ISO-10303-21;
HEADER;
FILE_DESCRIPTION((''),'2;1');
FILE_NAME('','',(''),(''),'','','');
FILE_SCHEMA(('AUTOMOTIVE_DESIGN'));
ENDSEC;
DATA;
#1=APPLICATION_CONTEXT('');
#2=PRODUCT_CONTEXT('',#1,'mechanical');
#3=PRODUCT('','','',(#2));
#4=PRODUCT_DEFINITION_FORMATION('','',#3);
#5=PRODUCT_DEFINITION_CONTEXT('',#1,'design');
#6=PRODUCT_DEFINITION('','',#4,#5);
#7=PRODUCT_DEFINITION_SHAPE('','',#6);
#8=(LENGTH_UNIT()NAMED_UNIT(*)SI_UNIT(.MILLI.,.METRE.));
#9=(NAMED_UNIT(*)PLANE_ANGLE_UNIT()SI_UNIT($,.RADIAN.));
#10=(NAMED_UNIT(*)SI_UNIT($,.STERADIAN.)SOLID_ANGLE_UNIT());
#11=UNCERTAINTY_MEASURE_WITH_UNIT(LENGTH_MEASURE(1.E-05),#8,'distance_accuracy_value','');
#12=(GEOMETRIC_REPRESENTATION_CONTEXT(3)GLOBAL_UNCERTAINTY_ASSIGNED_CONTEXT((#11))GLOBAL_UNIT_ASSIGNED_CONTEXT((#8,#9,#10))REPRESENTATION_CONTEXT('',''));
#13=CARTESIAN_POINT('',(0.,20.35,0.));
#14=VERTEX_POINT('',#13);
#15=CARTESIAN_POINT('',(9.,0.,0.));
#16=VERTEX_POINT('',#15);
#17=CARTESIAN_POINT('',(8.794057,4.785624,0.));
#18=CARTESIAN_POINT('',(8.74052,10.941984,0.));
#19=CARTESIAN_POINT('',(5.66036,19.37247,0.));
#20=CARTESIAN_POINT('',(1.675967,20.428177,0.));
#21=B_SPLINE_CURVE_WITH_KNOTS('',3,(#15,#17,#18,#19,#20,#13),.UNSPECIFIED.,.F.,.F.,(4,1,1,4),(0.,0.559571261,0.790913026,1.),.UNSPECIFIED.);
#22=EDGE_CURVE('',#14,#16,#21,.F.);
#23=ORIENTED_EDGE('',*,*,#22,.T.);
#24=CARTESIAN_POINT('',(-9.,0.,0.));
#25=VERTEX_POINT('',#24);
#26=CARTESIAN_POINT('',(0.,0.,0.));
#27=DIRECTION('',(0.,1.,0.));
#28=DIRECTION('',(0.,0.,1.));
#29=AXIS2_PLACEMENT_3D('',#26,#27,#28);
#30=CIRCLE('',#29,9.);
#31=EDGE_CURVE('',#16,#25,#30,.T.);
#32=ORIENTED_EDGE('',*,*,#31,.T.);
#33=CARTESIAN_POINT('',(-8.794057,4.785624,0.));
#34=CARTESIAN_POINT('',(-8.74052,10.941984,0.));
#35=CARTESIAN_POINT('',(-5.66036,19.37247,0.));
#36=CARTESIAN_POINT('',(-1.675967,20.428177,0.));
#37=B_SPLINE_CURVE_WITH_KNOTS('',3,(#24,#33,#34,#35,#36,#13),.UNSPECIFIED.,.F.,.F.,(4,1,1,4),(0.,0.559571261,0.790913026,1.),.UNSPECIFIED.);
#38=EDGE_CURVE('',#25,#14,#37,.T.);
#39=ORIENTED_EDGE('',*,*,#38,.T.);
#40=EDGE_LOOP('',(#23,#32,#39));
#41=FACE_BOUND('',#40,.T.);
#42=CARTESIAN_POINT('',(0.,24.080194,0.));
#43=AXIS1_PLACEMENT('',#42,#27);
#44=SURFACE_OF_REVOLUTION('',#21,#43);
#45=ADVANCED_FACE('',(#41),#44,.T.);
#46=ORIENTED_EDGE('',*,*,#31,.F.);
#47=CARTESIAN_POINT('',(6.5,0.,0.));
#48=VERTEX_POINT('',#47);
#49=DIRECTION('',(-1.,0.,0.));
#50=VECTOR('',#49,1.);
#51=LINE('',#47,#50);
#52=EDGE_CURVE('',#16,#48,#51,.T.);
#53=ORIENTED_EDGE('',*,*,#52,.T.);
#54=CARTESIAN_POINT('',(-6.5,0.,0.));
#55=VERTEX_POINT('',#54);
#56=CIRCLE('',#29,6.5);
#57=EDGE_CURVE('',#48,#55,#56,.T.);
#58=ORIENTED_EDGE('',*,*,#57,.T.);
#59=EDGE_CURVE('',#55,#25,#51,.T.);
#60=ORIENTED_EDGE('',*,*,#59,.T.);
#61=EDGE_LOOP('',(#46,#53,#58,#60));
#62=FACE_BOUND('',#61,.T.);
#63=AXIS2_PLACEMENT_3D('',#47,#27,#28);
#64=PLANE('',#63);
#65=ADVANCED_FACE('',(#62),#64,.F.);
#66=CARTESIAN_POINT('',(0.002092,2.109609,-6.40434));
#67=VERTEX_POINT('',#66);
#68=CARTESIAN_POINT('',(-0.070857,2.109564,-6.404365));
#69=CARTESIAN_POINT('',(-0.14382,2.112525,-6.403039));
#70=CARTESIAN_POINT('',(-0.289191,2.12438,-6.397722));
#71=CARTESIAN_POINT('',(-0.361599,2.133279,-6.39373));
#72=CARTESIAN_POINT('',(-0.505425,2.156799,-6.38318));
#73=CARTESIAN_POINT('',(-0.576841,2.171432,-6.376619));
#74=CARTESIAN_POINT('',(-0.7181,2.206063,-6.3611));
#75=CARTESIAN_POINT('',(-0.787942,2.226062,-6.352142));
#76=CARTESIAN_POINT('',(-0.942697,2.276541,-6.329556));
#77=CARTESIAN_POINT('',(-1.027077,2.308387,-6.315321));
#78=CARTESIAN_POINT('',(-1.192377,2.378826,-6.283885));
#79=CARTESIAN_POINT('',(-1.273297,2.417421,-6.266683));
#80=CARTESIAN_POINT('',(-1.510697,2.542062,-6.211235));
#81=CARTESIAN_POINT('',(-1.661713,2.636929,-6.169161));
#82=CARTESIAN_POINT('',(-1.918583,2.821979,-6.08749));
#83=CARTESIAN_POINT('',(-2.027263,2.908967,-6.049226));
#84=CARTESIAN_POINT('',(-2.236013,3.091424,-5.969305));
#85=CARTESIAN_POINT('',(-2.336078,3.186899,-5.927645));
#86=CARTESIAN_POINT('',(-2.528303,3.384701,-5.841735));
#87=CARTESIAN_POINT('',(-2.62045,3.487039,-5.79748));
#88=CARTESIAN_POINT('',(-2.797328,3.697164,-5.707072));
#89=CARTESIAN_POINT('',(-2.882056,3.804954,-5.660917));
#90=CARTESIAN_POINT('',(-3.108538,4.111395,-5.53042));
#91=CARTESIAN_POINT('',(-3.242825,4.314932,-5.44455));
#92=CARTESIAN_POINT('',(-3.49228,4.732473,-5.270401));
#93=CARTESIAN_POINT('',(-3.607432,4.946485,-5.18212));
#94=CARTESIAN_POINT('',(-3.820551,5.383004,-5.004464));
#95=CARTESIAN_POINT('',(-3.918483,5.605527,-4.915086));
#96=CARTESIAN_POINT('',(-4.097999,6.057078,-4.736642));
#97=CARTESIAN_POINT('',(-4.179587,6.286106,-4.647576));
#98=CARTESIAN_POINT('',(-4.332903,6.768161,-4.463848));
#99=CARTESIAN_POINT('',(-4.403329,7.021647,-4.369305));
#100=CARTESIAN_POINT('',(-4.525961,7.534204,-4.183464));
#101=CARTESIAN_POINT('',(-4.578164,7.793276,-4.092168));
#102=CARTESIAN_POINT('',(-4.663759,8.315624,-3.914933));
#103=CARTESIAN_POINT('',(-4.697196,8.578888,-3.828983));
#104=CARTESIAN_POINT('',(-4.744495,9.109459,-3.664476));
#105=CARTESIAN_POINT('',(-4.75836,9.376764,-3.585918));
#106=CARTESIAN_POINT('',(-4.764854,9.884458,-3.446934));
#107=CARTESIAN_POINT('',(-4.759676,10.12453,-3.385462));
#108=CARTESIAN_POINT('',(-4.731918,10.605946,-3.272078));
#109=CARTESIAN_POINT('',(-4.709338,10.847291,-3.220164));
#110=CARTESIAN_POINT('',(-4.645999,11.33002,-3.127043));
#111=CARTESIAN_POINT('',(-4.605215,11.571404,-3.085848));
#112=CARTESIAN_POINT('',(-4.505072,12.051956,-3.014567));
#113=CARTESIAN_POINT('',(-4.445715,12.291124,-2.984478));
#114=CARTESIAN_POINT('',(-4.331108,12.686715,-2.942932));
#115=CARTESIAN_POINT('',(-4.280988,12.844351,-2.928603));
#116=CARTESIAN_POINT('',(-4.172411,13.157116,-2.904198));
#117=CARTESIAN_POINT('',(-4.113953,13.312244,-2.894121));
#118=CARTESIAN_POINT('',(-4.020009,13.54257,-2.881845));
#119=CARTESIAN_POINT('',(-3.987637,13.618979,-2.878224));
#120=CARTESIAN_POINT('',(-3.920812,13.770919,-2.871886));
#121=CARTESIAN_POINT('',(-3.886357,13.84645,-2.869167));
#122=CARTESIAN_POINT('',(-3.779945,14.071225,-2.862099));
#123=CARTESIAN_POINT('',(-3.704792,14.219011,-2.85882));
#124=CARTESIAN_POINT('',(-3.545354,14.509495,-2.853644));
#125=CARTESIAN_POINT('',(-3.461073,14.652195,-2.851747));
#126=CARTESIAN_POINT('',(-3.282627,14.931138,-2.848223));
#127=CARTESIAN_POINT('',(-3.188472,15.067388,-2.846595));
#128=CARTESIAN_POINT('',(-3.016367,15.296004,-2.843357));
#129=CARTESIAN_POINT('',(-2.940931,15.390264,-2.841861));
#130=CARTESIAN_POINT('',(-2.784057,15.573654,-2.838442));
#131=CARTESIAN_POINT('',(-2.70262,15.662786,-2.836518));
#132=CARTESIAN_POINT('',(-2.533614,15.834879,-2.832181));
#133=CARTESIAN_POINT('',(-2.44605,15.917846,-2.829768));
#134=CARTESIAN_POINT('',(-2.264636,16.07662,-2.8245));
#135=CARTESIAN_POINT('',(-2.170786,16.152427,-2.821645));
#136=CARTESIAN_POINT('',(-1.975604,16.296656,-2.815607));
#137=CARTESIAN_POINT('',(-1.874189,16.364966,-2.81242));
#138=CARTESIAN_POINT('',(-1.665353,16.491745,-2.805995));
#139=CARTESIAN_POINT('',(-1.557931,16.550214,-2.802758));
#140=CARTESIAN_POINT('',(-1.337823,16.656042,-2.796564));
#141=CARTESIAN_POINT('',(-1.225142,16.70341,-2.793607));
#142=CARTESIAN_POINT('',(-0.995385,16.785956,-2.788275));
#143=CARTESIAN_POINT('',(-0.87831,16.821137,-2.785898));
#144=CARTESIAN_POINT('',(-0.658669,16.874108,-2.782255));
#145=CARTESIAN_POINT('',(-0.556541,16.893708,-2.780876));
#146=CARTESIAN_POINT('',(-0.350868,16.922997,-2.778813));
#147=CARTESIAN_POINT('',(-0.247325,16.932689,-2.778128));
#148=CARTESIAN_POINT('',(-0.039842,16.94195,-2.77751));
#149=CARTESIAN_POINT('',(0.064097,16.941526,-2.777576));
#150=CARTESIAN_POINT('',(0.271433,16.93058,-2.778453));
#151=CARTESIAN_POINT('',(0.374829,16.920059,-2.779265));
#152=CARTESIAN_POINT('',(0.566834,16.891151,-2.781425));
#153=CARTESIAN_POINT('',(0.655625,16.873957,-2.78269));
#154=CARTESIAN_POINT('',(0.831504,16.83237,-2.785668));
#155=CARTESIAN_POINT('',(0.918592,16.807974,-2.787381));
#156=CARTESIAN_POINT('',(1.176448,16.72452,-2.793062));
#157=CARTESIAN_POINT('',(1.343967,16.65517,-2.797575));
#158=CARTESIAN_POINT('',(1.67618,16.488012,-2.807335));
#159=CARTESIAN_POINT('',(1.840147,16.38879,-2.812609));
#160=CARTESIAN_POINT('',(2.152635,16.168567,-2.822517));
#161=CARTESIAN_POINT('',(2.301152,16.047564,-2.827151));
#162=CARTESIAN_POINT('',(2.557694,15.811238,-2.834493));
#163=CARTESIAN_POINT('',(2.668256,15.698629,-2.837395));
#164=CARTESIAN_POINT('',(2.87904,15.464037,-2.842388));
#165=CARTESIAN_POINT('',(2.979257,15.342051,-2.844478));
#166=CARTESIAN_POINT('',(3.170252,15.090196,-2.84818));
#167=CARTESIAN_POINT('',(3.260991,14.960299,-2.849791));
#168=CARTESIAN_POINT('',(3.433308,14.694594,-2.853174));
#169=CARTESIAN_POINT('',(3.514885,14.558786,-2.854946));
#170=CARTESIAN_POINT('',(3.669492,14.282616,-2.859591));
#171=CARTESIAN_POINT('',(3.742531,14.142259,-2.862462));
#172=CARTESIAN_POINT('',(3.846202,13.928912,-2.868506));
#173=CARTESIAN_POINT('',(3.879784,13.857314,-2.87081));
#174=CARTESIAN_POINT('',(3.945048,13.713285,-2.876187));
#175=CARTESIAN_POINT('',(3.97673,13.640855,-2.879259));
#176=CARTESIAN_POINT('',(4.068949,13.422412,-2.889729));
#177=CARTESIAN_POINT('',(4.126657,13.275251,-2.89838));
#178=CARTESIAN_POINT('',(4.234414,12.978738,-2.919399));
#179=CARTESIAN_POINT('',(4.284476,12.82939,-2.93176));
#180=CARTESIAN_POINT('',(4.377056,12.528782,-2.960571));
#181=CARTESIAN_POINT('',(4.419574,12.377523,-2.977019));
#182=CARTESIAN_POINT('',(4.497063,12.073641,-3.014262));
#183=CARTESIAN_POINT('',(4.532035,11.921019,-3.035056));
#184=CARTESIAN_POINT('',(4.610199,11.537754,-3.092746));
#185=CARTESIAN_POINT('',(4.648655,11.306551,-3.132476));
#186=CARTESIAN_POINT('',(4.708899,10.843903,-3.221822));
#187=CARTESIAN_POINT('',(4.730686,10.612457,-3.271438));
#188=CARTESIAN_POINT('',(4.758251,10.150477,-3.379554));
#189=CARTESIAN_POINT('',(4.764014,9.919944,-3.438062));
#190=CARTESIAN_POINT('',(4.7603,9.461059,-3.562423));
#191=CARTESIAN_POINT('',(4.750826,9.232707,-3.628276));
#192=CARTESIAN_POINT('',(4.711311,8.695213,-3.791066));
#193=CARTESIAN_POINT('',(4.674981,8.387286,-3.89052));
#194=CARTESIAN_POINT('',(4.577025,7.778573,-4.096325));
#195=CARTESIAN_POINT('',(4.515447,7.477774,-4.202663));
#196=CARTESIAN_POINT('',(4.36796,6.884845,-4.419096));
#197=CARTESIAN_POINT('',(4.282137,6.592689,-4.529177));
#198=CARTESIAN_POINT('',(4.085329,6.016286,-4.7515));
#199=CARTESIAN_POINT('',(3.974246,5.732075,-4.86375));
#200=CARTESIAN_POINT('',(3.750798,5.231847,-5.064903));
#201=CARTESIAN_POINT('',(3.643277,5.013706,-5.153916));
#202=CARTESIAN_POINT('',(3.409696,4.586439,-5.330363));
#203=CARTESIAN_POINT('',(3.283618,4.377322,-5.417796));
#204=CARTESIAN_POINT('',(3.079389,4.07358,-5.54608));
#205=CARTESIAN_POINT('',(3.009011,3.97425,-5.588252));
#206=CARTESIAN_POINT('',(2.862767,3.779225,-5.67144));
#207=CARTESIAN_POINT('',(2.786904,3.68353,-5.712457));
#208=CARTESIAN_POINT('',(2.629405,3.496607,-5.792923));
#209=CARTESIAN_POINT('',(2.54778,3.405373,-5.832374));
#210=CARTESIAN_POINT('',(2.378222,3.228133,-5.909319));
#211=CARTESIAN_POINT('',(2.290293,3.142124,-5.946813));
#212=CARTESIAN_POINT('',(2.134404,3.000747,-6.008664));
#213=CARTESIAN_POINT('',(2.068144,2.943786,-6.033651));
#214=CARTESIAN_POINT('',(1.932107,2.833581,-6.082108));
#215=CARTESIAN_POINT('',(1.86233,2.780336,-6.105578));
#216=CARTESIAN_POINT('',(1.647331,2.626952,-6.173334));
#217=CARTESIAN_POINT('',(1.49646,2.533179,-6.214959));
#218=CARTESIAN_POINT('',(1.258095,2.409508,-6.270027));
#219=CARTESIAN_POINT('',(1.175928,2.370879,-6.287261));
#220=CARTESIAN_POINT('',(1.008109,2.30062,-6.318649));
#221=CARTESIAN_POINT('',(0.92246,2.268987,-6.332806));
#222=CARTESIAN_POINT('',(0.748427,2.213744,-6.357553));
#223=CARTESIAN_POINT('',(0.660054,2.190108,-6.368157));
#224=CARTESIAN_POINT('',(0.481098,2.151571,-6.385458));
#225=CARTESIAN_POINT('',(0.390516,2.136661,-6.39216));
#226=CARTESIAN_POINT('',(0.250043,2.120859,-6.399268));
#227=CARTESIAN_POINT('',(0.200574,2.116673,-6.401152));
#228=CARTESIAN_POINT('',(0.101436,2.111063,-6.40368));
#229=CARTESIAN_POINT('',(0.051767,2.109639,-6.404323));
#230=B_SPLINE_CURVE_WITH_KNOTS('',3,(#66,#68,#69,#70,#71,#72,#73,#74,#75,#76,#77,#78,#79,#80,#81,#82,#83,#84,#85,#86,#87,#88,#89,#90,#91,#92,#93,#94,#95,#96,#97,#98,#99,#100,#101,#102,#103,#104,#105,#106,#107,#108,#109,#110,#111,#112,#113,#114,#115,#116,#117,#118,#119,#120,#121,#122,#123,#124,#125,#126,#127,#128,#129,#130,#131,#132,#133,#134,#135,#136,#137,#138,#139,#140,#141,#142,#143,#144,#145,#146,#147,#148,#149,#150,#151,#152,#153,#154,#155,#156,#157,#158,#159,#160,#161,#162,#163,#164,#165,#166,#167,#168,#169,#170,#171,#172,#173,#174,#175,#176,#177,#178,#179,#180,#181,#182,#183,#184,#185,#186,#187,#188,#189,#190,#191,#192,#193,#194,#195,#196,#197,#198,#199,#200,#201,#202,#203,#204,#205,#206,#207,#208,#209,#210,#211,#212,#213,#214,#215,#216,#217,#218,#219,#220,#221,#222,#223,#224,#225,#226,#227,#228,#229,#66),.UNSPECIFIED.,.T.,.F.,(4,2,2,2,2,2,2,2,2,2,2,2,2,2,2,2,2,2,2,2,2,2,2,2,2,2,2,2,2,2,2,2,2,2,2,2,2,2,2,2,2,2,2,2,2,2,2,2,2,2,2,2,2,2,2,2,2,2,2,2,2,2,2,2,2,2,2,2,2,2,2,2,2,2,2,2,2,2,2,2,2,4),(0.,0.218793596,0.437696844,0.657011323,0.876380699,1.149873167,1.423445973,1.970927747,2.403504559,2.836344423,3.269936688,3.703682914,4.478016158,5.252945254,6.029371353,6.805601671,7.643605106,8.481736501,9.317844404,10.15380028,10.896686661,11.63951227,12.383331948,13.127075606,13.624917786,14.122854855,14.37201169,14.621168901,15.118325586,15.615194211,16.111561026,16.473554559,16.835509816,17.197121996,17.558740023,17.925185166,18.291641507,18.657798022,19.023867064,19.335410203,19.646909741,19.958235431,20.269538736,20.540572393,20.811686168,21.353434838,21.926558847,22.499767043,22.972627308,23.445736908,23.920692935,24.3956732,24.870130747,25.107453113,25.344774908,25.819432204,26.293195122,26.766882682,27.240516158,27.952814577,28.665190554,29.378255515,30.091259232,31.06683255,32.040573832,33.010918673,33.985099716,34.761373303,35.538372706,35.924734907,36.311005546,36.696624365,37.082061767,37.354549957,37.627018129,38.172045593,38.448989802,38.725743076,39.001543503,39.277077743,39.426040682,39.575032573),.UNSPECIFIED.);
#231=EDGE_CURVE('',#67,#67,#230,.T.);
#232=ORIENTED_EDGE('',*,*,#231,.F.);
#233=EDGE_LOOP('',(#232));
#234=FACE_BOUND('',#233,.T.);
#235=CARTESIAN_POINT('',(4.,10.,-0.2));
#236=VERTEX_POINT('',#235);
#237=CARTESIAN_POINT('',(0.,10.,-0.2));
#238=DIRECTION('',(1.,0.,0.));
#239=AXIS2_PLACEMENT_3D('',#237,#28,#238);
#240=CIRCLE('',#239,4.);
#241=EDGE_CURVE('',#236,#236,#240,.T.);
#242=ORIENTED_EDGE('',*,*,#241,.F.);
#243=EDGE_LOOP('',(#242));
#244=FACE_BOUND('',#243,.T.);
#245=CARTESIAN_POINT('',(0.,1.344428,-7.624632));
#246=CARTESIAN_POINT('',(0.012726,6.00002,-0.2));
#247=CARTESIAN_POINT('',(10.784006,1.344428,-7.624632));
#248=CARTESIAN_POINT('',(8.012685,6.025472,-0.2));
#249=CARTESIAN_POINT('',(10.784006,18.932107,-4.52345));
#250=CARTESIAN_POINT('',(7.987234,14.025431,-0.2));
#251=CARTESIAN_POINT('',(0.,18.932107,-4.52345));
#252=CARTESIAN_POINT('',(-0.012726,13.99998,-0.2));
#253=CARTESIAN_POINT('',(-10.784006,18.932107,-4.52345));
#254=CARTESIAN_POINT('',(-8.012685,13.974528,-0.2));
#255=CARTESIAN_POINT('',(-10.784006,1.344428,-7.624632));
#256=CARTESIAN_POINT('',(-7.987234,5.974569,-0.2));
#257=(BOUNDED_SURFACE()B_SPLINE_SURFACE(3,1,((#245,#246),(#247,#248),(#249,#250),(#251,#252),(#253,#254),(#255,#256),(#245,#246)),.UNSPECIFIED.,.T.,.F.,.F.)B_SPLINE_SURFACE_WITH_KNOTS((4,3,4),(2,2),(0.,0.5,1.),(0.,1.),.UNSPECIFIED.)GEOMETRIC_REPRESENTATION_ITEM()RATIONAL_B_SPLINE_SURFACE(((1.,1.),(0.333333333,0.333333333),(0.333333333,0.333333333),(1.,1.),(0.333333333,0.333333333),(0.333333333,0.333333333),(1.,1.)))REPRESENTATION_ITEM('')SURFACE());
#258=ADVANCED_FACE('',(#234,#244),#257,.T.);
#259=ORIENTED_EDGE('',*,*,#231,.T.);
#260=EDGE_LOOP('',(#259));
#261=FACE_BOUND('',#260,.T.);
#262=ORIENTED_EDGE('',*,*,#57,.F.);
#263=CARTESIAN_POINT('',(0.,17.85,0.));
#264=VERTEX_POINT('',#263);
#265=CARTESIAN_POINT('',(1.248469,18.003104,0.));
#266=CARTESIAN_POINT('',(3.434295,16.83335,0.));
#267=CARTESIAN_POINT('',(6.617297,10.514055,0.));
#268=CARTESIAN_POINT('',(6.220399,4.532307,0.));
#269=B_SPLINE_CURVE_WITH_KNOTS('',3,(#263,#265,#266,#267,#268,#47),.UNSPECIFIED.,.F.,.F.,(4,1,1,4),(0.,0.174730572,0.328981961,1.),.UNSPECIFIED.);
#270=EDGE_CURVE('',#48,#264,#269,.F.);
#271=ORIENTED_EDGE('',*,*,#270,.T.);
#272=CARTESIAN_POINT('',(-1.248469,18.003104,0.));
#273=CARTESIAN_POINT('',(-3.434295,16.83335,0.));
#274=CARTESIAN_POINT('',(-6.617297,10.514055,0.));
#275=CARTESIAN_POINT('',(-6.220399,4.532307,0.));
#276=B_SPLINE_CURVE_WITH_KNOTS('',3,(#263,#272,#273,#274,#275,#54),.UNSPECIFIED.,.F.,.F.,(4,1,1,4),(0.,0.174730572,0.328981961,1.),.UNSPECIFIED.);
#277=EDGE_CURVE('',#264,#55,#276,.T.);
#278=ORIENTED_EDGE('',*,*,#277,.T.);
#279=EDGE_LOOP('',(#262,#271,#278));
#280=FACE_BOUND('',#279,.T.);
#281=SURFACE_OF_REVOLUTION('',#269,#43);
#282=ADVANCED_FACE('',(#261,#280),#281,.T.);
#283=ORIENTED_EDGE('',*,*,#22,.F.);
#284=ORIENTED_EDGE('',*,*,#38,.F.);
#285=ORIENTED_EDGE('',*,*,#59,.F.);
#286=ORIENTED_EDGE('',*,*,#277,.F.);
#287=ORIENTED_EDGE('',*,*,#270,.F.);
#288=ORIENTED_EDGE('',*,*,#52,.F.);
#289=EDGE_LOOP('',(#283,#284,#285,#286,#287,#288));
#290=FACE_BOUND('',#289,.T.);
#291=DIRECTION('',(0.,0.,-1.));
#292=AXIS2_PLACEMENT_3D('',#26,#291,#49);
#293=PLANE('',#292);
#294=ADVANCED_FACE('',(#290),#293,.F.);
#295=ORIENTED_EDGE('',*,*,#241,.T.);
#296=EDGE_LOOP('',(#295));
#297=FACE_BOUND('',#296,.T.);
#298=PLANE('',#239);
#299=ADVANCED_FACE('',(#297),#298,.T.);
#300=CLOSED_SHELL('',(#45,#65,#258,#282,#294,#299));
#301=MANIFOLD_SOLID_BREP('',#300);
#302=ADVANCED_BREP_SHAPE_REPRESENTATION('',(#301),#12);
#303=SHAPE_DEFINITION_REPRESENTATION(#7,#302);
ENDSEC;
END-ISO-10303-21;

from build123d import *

# Parameters (mm, degrees)
SKETCH2_W          = 21.920038039
SKETCH2_H          = 22.914873095
CUT_EXTRUDE1_DEPTH = 9


with BuildPart() as part:
    # Sketch1 → Revolve1 (revolve)
    with BuildSketch(Plane.XY):
        with BuildLine():
            Line((6.5, 0), (9, 0))
            add(Edge.make_bspline(
                [(0, 20.35), (1.675966842, 20.428176516), (5.66035993, 19.372470149), (8.740520085, 10.941984052), (8.794057121, 4.785623995), (9, 0)],
                knots=[0, 0, 0, 0, 0.209086974, 0.440428739, 1, 1, 1, 1], degree=3))
            Line((0, 20.35), (0, 17.85))
            add(Edge.make_bspline(
                [(0, 17.85), (1.248468613, 18.003104069), (3.434295374, 16.83334968), (6.617297319, 10.514055415), (6.220398856, 4.532307189), (6.5, 0)],
                knots=[0, 0, 0, 0, 0.174730572, 0.328981961, 1, 1, 1, 1], degree=3))
        make_face()
    revolve(axis=Axis((0, 24.080193906, 0), (0, -1, 0)))

    # Sketch2 → Cut-Extrude1 (cut)
    with BuildSketch(Plane.XY.offset(9)):
        with Locations((-0.139254467, 10.620448961)):
            Rectangle(SKETCH2_W, SKETCH2_H)
    extrude(amount=-CUT_EXTRUDE1_DEPTH, mode=Mode.SUBTRACT)

    # Loft1: read off the stored shape, not the designer's step
    # Loft1: loft between two sections, ruled curve by curve
    loft1_from = [
        Edge.make_bspline([(0, 1.344428361, -7.62463212), (10.784005956, 1.344428361, -7.62463212), (10.784005956, 18.932107275, -4.523449799), (0, 18.932107275, -4.523449799), (-10.784005956, 18.932107275, -4.523449799), (-10.784005956, 1.344428361, -7.62463212), (0, 1.344428361, -7.62463212)], [0, 0, 0, 0, 0.5, 0.5, 0.5, 1, 1, 1, 1], 3, [1, 0.333333333, 0.333333333, 1, 0.333333333, 0.333333333, 1]),
    ]
    loft1_to = [
        Edge.make_bspline([(0.012725843, 6.000020243, -0.2), (8.012685357, 6.02547193, -0.2), (7.98723367, 14.025431443, -0.2), (-0.012725843, 13.999979757, -0.2), (-8.012685357, 13.97452807, -0.2), (-7.98723367, 5.974568557, -0.2), (0.012725843, 6.000020243, -0.2)], [0, 0, 0, 0, 0.5, 0.5, 0.5, 1, 1, 1, 1], 3, [1, 0.333333333, 0.333333333, 1, 0.333333333, 0.333333333, 1]),
    ]
    loft1 = Solid(Shell([*[Face.make_surface_from_curves(loft1_from[k], loft1_to[k]) for k in range(1)], Face(Wire(loft1_from)), Face(Wire(loft1_to))]))
    add(loft1)


solid = part.part
